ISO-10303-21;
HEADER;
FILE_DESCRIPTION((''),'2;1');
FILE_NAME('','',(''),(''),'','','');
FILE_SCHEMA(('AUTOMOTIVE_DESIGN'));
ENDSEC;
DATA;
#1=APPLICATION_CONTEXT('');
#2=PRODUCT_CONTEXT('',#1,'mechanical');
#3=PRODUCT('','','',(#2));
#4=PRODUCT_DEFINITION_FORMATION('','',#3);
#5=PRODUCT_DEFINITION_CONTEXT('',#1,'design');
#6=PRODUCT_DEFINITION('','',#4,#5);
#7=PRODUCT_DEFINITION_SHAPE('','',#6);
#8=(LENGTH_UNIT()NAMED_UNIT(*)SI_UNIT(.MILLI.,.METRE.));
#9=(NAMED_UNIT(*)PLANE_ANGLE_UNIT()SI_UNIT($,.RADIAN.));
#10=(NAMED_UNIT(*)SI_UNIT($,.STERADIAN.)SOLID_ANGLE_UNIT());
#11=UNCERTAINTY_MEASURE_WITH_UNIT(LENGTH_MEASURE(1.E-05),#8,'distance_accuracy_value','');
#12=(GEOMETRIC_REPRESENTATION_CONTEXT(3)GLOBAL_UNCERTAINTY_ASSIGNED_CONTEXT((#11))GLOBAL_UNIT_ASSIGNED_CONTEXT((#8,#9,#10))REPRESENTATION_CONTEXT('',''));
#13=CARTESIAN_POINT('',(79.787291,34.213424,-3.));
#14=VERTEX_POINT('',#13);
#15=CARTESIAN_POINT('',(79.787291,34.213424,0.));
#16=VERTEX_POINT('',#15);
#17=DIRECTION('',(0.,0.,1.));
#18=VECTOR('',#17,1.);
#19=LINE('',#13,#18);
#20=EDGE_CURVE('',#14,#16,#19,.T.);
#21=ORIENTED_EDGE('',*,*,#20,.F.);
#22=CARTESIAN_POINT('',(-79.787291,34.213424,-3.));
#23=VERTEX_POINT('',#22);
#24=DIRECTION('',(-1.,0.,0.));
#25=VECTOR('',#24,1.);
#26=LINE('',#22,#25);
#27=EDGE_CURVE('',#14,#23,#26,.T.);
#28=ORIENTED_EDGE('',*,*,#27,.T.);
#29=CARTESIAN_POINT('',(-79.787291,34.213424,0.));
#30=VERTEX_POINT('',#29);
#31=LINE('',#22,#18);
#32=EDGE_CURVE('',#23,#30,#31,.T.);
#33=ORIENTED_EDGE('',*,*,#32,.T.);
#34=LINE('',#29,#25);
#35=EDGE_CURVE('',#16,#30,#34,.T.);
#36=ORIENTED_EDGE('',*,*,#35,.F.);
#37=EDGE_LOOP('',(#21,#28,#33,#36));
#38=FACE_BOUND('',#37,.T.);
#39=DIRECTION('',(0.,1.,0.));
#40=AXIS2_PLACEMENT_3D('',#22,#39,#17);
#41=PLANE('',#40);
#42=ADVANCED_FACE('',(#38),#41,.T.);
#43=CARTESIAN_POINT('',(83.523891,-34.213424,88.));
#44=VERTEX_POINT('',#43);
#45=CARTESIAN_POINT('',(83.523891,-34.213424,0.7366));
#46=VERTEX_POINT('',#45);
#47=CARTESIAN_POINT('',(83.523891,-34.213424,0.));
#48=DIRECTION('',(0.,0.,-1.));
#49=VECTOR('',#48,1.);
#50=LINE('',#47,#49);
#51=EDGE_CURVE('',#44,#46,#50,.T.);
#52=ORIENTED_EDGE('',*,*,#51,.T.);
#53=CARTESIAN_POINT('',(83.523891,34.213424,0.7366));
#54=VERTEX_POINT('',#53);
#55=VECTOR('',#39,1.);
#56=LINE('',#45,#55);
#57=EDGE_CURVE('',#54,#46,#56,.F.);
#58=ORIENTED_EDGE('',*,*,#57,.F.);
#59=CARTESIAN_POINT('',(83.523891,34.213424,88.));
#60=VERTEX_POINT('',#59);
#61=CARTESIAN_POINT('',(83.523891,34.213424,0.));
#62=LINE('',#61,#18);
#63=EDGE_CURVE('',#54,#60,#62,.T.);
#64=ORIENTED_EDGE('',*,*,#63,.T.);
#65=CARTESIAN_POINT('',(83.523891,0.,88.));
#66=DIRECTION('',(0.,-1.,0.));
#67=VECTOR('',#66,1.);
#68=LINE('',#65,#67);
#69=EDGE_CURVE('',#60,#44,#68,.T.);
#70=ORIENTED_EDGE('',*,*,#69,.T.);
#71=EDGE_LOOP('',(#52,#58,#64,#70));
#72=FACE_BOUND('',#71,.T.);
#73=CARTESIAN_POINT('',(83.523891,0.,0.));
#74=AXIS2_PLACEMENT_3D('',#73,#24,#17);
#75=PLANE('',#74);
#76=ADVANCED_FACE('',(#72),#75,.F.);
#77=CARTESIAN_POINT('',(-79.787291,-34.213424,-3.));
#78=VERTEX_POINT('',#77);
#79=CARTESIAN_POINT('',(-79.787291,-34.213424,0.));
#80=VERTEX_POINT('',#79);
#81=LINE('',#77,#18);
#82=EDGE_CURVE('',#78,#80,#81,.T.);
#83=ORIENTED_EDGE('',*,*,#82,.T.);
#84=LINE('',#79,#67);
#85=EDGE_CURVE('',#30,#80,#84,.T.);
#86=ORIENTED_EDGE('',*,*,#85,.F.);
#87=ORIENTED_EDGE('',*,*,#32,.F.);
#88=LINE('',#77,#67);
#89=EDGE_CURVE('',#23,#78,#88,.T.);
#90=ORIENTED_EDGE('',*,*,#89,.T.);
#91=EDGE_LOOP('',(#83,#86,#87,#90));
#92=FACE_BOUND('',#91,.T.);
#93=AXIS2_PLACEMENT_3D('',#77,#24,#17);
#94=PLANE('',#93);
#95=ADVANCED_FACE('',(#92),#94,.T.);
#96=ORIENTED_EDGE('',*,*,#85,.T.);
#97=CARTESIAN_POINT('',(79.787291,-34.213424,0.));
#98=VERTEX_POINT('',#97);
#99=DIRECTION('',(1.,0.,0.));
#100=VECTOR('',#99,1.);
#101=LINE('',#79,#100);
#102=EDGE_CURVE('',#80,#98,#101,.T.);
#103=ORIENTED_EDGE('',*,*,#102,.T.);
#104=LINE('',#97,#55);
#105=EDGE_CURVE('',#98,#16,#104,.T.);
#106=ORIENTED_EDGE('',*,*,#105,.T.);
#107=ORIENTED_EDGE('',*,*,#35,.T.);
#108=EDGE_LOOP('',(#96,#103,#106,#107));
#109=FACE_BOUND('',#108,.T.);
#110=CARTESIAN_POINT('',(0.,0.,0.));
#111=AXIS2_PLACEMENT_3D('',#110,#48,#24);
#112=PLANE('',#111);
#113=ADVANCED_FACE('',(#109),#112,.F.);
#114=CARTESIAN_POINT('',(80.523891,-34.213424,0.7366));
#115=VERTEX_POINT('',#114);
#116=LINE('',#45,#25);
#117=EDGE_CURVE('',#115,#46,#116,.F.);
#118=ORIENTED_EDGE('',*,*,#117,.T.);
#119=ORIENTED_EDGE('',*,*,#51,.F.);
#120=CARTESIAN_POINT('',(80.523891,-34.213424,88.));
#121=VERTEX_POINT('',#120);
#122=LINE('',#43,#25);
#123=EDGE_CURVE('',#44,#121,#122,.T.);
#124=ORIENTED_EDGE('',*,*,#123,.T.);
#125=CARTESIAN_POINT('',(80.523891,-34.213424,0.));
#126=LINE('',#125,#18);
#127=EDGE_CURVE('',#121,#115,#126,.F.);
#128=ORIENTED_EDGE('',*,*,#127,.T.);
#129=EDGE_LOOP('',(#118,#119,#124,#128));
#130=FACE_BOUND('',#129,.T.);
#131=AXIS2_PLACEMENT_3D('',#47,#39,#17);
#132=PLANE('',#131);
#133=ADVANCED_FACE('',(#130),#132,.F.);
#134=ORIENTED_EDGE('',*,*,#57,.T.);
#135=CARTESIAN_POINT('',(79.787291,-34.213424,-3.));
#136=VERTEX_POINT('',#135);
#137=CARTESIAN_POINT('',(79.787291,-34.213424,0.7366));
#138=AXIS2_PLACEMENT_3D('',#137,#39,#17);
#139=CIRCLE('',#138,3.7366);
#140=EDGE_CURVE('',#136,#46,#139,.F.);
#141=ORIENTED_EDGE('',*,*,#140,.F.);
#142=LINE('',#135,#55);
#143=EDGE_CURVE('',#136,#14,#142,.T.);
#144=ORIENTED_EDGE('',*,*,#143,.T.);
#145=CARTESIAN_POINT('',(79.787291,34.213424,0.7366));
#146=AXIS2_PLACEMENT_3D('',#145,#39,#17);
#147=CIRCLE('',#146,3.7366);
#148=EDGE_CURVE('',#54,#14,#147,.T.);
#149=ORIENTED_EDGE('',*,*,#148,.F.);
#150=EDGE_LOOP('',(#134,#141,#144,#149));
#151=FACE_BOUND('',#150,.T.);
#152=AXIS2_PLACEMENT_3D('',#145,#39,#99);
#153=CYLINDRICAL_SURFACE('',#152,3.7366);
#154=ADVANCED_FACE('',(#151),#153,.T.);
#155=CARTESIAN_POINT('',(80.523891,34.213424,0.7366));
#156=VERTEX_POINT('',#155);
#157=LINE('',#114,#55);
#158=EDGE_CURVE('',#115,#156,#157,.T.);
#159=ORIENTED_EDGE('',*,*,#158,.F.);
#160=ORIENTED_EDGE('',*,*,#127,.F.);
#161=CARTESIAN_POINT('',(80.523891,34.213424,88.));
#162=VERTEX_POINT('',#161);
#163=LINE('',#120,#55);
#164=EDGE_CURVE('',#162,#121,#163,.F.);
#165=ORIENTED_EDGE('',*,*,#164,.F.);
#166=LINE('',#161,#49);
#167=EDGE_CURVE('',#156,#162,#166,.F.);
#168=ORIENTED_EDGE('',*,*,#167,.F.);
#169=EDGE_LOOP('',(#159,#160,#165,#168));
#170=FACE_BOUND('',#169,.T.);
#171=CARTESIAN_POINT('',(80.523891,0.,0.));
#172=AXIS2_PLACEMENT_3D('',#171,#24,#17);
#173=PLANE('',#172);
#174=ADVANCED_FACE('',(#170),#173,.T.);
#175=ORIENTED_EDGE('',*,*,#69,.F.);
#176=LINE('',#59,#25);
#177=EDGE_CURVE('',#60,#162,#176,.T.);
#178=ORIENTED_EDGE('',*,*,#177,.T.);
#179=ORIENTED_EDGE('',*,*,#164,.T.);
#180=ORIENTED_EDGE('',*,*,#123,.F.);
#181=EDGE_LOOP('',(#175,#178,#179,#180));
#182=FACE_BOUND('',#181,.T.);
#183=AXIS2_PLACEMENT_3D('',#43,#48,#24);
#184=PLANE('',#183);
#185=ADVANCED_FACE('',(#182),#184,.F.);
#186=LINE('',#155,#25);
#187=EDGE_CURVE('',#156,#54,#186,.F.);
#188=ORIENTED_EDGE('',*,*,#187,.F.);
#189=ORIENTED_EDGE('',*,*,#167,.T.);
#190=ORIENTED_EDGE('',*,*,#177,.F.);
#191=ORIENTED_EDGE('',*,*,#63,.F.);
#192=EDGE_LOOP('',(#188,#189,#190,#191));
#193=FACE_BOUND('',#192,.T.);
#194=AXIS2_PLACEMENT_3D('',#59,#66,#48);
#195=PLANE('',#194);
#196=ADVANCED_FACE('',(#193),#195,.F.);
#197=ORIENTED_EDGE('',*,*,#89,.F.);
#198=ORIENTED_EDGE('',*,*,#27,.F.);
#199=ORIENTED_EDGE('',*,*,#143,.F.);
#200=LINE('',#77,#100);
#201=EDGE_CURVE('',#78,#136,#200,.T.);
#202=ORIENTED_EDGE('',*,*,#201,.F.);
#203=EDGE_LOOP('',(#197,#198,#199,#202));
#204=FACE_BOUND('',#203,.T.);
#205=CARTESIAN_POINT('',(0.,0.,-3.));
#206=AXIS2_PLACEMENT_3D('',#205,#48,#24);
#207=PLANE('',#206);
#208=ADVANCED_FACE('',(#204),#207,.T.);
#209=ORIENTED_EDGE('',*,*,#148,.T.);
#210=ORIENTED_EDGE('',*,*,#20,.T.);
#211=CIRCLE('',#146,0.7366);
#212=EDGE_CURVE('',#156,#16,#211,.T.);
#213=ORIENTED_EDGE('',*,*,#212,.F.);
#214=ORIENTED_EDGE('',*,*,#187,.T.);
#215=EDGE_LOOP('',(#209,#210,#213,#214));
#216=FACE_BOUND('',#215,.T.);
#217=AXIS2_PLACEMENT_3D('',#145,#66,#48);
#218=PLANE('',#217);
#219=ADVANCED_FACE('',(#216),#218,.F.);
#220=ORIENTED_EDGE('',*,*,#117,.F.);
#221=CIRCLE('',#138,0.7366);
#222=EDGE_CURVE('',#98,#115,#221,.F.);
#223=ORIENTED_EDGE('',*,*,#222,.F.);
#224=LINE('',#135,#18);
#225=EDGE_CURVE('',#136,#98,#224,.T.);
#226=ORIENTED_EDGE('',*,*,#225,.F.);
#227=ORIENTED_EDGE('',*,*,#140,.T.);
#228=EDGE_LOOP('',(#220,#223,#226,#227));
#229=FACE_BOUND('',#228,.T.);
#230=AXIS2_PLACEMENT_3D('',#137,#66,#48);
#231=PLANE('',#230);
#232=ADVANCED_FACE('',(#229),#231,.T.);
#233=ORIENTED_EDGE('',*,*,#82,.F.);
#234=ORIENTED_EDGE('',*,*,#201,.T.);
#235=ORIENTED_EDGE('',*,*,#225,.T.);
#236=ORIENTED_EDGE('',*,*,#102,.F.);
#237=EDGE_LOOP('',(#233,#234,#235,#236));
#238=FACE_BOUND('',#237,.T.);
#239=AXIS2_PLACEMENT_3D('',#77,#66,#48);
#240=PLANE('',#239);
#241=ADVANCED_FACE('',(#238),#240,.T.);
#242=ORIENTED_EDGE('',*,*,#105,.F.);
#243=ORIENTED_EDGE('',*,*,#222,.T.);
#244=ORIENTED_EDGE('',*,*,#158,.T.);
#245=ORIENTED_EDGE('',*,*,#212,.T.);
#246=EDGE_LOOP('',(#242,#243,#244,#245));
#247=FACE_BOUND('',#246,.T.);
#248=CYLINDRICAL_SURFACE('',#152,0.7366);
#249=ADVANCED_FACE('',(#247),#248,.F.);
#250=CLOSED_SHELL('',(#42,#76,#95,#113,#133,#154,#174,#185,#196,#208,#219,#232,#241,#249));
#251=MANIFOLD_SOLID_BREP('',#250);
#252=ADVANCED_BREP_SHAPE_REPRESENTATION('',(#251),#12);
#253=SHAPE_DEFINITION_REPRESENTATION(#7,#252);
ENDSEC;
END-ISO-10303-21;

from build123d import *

# Parameters (mm, degrees)
SKETCH2_W          = 159.574581504
SKETCH2_H          = 68.426848692
BASE_FLANGE1_DEPTH = 3
EDGE_FLANGE1_DEPTH = 68.426848692


# Sheet-metal steps are written as plain solids
with BuildPart() as part:
    # Sketch2 → Base-Flange1 (new body)
    with BuildSketch(Plane.XY):
        Rectangle(SKETCH2_W, SKETCH2_H)
    extrude(amount=-BASE_FLANGE1_DEPTH)

    # Edge-Flange1 section (across the edge) → Edge-Flange1 (add)
    with BuildSketch(Plane(origin=(80.523890752, -34.213424346, 0), x_dir=(-1, 0, 0), z_dir=(0, 1, 0))):
        with BuildLine():
            Line((-3, 0.7366), (-3, 88))
            Line((-3, 88), (0, 88))
            Line((0, 88), (0, 0.7366))
            ThreePointArc((0, 0.7366), (0.215745145, 0.215745145), (0.7366, 0))
            Line((0.7366, 0), (0.7366, -3))
            ThreePointArc((0.7366, -3), (-1.905575199, -1.905575199), (-3, 0.7366))
        make_face()
    extrude(amount=EDGE_FLANGE1_DEPTH)


solid = part.part
